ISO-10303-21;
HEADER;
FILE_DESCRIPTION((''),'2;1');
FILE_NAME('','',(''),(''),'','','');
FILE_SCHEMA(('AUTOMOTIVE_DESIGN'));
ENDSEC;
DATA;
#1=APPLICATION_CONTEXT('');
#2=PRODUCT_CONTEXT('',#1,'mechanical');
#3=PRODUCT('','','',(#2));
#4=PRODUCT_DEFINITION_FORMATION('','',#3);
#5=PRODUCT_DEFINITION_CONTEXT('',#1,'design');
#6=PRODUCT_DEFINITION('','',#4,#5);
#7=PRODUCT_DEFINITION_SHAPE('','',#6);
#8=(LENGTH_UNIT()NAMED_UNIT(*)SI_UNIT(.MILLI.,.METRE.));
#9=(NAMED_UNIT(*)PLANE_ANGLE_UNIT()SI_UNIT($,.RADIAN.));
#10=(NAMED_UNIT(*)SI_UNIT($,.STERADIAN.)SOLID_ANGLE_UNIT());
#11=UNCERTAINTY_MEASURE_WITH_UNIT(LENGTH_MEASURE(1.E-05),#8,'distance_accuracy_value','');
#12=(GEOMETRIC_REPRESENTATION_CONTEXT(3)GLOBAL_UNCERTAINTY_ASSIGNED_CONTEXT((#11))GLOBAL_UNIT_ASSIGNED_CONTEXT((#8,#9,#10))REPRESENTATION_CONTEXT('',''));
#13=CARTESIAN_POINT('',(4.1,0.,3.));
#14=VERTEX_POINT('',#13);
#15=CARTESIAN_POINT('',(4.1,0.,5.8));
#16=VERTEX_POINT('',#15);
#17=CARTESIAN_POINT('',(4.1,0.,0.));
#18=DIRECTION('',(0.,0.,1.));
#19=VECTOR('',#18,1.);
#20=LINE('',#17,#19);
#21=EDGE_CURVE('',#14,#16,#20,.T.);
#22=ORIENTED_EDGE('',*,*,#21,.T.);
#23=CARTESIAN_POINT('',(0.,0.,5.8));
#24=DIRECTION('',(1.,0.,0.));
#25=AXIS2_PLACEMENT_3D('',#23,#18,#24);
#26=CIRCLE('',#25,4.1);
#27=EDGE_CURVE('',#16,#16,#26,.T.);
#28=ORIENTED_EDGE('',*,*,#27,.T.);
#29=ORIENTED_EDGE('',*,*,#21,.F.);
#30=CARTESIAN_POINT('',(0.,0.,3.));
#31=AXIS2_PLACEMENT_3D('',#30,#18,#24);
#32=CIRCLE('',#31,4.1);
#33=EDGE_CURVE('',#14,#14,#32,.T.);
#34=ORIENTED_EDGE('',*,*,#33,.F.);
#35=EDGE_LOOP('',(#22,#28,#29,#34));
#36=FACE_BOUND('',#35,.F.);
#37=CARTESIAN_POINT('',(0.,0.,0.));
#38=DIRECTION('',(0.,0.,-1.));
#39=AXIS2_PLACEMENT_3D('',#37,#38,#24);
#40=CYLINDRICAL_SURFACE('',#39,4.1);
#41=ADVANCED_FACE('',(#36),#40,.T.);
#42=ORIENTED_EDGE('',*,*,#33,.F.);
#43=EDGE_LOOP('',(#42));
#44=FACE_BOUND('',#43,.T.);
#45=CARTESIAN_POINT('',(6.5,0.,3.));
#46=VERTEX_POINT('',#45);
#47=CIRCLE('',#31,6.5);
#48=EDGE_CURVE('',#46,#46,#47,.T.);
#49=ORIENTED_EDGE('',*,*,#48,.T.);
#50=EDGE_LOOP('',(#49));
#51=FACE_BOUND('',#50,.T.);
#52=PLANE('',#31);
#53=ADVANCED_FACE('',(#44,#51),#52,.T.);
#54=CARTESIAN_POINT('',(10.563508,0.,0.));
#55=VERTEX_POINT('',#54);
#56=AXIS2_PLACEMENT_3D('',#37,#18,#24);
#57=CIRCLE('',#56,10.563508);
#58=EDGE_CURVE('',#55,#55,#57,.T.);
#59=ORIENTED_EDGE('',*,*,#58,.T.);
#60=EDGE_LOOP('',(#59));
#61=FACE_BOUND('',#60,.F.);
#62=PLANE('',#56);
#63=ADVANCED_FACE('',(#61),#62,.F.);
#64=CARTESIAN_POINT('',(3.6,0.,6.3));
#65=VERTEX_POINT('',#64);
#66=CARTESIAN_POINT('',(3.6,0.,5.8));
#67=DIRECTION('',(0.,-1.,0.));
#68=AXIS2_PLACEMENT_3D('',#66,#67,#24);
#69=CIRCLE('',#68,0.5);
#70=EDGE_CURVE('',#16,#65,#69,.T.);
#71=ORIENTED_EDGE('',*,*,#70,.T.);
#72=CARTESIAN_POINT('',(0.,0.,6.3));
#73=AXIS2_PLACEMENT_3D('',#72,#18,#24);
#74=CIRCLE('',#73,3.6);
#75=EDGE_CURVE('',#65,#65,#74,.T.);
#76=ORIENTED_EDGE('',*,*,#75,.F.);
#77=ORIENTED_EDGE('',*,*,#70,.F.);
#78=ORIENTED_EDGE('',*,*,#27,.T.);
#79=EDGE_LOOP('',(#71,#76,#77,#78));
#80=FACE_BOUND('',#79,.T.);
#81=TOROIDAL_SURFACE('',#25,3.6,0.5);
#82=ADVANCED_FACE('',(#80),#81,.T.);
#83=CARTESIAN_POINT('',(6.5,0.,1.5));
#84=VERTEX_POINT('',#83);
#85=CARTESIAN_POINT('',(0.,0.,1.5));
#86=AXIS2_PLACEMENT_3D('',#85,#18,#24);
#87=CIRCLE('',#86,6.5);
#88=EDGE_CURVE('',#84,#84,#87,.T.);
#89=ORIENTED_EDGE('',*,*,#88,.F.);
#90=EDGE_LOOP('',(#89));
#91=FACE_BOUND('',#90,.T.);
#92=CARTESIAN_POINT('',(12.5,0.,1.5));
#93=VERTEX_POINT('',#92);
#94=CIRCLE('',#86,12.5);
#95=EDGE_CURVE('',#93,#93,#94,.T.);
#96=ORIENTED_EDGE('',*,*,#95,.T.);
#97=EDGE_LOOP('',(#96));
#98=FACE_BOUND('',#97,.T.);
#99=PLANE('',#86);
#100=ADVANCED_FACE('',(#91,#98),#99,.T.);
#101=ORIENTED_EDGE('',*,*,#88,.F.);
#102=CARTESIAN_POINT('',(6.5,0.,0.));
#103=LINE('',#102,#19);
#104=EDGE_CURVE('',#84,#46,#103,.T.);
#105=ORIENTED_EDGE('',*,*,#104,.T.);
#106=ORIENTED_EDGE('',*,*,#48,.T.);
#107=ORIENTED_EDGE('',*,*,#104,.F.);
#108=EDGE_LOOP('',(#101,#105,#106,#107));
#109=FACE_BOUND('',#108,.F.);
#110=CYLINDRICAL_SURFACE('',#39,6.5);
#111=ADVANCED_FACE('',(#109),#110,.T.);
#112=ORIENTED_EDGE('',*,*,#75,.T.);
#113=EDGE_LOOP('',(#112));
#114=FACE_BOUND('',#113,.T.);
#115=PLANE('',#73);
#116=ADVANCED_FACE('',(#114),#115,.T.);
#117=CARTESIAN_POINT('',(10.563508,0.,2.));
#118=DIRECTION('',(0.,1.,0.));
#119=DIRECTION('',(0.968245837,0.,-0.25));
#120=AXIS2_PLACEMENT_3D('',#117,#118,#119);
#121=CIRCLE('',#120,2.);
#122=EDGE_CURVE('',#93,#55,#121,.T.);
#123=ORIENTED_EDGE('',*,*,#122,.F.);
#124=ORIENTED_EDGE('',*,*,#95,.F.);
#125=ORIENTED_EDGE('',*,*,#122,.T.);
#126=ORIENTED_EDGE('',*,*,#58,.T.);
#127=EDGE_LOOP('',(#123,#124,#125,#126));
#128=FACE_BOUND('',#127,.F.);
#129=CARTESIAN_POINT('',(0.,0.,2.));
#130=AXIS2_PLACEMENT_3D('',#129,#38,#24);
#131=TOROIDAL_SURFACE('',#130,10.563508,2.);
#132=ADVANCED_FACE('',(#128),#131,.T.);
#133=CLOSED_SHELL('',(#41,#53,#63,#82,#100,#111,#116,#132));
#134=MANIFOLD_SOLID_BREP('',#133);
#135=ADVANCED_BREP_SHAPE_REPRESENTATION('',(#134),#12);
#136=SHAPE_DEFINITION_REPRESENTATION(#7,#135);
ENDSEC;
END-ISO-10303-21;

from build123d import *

# Parameters (mm, degrees)
F0_R     = 4.1
F1_DEPTH = 6.3
F0_R_2   = 6.5
F2_DEPTH = 3
F0_R_3   = 12.5
F3_DEPTH = 1.5
F4_R     = 0.5


# Not quite as in the source:
# - a fillet or chamfer that OpenCascade refuses, or shapes differently, is made with other operations: its cross-section is extruded or revolved along the edge and cut away or added
# - a feature names something its author has since deleted; it is built from what else it names


with BuildPart() as f1:
    # F0 (on Top) → F1 (new body)
    with BuildSketch(Plane.XY):
        Circle(F0_R)
    extrude(amount=F1_DEPTH)

    # F0 (on Top) → F2 (join)
    with BuildSketch(Plane.XY):
        Circle(F0_R_2)
        Circle(F0_R, mode=Mode.SUBTRACT)
    extrude(amount=F2_DEPTH)

    # F0 (on Top) → F3 (join)
    with BuildSketch(Plane.XY):
        Circle(F0_R_3)
        Circle(F0_R_2, mode=Mode.SUBTRACT)
    extrude(amount=F3_DEPTH)

    # F4
    f4_edges = [f1.edges().sort_by_distance(p)[0] for p in [
        (-4.1, 0, 6.3),
    ]]
    fillet(f4_edges, radius=F4_R)

    # F5: fillet of radius 2 on 1 edges, made by hand

    # F5_s1 → F5_t2 (revolve, cut)
    with BuildSketch(Plane.XZ):
        with BuildLine():
            ThreePointArc((12.5, 1.5), (11.7882531983, 0.4188611699), (10.5635083269, 0))
            Line((10.5635083269, 0), (12.5, 0))
            Line((12.5, 0), (12.5, 1.5))
        make_face()
    revolve(axis=Axis((0, 0, 0), (0, 0, 1)), mode=Mode.SUBTRACT)


solid = f1.part
